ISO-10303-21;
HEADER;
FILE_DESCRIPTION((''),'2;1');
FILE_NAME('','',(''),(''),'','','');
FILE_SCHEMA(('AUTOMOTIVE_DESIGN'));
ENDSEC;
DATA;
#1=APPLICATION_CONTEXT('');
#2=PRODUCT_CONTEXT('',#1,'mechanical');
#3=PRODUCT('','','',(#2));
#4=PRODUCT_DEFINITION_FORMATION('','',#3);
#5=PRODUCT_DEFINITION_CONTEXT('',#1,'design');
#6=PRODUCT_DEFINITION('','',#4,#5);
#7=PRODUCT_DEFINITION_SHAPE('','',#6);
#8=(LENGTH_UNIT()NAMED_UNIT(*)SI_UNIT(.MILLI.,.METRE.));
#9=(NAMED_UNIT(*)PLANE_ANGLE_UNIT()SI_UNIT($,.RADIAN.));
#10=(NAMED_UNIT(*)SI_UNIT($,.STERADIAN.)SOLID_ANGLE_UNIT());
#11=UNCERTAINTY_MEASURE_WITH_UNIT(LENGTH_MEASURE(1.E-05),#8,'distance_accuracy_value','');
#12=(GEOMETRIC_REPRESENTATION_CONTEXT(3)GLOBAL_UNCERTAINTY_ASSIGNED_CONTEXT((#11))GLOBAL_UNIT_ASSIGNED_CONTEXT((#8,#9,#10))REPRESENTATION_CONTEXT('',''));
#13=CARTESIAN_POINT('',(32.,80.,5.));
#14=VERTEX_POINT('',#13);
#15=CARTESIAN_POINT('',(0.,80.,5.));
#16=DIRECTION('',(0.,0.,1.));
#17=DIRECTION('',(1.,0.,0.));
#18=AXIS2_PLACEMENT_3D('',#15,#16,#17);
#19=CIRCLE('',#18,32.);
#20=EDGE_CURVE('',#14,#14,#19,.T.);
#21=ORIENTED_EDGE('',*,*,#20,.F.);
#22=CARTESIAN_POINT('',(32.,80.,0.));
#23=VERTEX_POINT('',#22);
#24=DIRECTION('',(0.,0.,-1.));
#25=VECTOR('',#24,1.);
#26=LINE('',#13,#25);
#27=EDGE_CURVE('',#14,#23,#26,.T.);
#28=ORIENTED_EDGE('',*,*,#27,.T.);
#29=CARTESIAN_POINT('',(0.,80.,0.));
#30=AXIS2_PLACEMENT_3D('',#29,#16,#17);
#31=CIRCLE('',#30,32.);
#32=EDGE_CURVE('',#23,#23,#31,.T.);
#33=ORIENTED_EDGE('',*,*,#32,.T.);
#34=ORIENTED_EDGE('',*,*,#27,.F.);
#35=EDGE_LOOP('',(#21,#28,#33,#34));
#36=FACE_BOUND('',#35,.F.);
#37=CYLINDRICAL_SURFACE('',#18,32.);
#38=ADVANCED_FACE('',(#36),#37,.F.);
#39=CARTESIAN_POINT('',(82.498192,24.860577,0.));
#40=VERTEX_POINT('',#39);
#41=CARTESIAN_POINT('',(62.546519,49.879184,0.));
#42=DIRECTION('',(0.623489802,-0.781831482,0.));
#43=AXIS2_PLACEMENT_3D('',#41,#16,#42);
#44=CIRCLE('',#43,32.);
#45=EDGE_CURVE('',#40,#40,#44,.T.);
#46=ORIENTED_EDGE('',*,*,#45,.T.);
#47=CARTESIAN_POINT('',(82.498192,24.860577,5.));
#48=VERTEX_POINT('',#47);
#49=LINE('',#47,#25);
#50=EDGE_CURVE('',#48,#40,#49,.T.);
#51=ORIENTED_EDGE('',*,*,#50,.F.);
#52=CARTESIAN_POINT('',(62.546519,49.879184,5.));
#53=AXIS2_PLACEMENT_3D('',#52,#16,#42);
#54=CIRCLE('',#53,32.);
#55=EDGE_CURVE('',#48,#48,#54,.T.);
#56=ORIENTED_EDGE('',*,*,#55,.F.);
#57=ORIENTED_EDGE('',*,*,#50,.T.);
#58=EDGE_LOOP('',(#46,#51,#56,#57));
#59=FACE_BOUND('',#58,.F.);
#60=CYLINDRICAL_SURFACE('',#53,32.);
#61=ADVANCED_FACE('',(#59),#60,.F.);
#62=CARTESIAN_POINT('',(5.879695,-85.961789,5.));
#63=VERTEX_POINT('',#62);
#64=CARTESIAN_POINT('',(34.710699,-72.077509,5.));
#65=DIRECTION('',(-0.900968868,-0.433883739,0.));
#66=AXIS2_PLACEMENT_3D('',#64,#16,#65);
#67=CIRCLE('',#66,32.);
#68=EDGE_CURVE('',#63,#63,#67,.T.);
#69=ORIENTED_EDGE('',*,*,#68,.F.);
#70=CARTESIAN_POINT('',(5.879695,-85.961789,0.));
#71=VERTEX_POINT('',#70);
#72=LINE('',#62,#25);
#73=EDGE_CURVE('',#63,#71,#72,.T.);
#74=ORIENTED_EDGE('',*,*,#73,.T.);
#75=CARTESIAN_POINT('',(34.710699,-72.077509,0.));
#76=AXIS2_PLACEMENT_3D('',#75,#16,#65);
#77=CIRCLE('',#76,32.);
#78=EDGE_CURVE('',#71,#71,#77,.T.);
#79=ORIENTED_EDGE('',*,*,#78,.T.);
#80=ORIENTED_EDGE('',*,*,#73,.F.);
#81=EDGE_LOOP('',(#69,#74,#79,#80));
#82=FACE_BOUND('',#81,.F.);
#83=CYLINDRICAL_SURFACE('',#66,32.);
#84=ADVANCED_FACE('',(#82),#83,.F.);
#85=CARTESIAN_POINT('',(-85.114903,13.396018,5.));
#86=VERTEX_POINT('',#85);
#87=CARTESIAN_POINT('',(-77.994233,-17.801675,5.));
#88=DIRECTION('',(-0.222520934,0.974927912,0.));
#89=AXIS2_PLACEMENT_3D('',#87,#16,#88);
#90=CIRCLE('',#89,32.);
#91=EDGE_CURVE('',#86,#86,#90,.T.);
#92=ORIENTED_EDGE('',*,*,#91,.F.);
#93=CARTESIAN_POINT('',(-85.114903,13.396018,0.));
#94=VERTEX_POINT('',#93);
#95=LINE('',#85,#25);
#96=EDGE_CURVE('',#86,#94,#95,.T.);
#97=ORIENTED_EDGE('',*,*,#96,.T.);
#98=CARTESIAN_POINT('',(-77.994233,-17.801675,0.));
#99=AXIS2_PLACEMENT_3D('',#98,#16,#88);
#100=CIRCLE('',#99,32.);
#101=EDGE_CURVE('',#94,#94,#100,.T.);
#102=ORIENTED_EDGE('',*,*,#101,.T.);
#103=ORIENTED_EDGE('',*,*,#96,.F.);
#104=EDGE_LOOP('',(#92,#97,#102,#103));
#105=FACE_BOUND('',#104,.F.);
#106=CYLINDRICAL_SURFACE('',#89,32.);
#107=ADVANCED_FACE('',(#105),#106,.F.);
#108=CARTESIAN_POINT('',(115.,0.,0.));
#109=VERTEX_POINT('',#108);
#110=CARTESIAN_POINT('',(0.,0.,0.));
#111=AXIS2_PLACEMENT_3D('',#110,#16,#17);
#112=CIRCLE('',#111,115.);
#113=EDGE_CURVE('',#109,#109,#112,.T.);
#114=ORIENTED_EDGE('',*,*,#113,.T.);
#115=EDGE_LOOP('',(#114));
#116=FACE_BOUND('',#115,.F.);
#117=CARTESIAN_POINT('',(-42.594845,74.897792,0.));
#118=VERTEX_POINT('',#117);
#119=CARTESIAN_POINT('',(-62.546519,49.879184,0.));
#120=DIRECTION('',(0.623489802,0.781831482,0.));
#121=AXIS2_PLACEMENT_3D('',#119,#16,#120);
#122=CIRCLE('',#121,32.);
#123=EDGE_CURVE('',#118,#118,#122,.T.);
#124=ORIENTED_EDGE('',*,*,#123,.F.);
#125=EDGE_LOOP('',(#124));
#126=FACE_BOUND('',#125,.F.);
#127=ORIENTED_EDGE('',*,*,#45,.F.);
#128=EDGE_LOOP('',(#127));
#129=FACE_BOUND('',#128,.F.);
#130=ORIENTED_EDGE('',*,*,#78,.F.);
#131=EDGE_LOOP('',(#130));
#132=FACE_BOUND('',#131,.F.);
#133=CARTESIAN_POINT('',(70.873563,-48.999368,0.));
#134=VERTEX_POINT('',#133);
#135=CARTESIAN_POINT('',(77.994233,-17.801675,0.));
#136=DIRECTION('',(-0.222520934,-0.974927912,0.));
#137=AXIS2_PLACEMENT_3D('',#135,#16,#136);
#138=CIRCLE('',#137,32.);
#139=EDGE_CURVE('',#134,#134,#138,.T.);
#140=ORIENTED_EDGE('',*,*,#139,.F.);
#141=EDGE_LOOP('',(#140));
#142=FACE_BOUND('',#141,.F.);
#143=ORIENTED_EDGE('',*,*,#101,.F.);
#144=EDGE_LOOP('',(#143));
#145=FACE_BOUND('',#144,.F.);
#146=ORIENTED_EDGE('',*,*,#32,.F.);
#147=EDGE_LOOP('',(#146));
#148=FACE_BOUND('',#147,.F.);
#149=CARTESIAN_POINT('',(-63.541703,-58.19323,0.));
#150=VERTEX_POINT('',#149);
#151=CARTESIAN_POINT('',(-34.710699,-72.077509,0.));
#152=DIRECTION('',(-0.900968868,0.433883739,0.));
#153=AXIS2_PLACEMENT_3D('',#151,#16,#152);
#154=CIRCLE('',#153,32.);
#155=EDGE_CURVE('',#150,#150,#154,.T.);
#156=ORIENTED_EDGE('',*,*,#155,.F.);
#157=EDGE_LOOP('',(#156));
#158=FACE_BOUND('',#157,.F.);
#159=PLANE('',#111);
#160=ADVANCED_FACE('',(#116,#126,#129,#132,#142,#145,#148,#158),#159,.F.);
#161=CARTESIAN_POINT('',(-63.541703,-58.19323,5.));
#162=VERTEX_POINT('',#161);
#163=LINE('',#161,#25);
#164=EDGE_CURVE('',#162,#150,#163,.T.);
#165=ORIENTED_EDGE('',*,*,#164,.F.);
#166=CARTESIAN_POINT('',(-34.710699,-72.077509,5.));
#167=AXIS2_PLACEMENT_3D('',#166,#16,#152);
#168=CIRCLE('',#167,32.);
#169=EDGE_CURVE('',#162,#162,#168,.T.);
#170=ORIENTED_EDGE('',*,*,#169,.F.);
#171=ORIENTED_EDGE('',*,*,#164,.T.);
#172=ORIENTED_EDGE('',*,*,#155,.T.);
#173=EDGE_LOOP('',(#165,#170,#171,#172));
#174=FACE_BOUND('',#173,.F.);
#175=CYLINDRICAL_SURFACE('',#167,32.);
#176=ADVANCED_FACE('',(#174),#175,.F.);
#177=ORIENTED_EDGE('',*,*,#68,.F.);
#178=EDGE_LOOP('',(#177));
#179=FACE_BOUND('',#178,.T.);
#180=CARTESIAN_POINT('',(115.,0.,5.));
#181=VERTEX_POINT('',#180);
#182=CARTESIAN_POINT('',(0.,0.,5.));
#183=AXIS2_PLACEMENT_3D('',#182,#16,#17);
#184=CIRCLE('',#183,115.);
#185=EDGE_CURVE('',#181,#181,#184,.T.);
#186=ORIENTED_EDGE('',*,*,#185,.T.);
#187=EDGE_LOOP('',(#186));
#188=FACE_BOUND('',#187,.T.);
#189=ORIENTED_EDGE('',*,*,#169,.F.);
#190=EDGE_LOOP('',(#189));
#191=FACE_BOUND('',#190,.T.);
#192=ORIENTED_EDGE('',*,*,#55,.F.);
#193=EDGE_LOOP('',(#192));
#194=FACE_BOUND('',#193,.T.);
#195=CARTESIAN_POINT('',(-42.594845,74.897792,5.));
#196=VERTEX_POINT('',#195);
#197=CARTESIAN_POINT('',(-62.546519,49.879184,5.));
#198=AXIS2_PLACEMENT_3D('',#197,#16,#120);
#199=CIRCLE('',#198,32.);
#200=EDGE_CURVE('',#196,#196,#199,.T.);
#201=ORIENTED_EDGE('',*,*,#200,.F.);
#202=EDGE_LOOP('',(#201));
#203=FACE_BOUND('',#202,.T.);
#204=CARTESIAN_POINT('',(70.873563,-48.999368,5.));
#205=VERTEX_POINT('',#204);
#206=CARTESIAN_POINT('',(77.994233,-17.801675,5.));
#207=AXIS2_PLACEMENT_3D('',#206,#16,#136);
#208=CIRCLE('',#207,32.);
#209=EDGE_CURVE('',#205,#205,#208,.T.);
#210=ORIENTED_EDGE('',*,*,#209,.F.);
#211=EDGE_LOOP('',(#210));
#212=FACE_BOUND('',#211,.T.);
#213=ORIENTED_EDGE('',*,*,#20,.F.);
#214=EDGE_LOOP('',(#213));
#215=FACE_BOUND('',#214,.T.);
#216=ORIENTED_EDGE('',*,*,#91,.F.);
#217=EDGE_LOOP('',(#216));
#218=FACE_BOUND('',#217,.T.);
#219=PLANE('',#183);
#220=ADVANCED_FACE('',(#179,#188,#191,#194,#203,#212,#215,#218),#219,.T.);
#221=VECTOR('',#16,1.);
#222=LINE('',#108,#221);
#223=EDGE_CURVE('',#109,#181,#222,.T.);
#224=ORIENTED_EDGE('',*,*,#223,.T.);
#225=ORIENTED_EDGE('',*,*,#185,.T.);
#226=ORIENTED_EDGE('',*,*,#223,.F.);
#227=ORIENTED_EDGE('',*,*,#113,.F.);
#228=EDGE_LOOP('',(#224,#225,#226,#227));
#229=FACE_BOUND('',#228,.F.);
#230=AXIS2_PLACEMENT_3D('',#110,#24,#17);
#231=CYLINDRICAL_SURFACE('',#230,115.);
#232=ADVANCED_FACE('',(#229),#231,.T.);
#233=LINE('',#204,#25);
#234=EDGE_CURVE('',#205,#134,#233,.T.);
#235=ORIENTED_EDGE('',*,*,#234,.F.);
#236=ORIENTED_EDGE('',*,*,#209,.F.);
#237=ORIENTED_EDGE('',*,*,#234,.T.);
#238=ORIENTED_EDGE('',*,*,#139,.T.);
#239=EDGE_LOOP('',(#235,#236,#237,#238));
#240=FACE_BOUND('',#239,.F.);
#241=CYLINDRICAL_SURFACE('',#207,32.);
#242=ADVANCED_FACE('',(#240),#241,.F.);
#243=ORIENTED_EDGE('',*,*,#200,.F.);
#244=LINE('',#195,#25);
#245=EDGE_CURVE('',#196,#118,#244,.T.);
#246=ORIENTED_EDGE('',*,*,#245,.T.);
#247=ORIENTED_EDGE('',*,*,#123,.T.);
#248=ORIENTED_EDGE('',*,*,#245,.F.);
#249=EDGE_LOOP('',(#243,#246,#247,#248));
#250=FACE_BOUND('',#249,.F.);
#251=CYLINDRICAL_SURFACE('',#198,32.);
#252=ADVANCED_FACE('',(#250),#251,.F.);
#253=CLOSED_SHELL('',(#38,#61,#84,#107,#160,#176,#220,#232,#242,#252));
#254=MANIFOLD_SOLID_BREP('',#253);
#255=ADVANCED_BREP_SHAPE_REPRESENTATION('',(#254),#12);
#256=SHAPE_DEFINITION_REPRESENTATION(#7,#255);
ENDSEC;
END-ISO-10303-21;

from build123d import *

# Parameters (mm, degrees)
F0_R            = 115
F1_DEPTH        = 5
F2_R            = 32
F3_DEPTH        = 5
F3_COPIES_COUNT = 7


# Not quite as in the source:
# - a pattern or mirror of a feature is missing from the dataset's text; its kind, count and spacing are read off the source's solid


with BuildPart() as f1:
    # F0 (on Top) → F1 (new body)
    with BuildSketch(Plane.XY):
        Circle(F0_R)
    extrude(amount=F1_DEPTH)

    # F2 (on face) → F3 (cut)
    with BuildSketch(Plane.XY.offset(5)):
        with Locations((0, 80)):
            Circle(F2_R)
    f3 = extrude(amount=-F3_DEPTH, mode=Mode.SUBTRACT)

    # F3_copies: F3 ×7 about axis
    f3_copies_axis = Axis((0, 0, 0), (0, 0, 1))
    for i in range(1, F3_COPIES_COUNT):
        add(f3.rotate(f3_copies_axis, i * 360 / F3_COPIES_COUNT), mode=Mode.SUBTRACT)


solid = f1.part
